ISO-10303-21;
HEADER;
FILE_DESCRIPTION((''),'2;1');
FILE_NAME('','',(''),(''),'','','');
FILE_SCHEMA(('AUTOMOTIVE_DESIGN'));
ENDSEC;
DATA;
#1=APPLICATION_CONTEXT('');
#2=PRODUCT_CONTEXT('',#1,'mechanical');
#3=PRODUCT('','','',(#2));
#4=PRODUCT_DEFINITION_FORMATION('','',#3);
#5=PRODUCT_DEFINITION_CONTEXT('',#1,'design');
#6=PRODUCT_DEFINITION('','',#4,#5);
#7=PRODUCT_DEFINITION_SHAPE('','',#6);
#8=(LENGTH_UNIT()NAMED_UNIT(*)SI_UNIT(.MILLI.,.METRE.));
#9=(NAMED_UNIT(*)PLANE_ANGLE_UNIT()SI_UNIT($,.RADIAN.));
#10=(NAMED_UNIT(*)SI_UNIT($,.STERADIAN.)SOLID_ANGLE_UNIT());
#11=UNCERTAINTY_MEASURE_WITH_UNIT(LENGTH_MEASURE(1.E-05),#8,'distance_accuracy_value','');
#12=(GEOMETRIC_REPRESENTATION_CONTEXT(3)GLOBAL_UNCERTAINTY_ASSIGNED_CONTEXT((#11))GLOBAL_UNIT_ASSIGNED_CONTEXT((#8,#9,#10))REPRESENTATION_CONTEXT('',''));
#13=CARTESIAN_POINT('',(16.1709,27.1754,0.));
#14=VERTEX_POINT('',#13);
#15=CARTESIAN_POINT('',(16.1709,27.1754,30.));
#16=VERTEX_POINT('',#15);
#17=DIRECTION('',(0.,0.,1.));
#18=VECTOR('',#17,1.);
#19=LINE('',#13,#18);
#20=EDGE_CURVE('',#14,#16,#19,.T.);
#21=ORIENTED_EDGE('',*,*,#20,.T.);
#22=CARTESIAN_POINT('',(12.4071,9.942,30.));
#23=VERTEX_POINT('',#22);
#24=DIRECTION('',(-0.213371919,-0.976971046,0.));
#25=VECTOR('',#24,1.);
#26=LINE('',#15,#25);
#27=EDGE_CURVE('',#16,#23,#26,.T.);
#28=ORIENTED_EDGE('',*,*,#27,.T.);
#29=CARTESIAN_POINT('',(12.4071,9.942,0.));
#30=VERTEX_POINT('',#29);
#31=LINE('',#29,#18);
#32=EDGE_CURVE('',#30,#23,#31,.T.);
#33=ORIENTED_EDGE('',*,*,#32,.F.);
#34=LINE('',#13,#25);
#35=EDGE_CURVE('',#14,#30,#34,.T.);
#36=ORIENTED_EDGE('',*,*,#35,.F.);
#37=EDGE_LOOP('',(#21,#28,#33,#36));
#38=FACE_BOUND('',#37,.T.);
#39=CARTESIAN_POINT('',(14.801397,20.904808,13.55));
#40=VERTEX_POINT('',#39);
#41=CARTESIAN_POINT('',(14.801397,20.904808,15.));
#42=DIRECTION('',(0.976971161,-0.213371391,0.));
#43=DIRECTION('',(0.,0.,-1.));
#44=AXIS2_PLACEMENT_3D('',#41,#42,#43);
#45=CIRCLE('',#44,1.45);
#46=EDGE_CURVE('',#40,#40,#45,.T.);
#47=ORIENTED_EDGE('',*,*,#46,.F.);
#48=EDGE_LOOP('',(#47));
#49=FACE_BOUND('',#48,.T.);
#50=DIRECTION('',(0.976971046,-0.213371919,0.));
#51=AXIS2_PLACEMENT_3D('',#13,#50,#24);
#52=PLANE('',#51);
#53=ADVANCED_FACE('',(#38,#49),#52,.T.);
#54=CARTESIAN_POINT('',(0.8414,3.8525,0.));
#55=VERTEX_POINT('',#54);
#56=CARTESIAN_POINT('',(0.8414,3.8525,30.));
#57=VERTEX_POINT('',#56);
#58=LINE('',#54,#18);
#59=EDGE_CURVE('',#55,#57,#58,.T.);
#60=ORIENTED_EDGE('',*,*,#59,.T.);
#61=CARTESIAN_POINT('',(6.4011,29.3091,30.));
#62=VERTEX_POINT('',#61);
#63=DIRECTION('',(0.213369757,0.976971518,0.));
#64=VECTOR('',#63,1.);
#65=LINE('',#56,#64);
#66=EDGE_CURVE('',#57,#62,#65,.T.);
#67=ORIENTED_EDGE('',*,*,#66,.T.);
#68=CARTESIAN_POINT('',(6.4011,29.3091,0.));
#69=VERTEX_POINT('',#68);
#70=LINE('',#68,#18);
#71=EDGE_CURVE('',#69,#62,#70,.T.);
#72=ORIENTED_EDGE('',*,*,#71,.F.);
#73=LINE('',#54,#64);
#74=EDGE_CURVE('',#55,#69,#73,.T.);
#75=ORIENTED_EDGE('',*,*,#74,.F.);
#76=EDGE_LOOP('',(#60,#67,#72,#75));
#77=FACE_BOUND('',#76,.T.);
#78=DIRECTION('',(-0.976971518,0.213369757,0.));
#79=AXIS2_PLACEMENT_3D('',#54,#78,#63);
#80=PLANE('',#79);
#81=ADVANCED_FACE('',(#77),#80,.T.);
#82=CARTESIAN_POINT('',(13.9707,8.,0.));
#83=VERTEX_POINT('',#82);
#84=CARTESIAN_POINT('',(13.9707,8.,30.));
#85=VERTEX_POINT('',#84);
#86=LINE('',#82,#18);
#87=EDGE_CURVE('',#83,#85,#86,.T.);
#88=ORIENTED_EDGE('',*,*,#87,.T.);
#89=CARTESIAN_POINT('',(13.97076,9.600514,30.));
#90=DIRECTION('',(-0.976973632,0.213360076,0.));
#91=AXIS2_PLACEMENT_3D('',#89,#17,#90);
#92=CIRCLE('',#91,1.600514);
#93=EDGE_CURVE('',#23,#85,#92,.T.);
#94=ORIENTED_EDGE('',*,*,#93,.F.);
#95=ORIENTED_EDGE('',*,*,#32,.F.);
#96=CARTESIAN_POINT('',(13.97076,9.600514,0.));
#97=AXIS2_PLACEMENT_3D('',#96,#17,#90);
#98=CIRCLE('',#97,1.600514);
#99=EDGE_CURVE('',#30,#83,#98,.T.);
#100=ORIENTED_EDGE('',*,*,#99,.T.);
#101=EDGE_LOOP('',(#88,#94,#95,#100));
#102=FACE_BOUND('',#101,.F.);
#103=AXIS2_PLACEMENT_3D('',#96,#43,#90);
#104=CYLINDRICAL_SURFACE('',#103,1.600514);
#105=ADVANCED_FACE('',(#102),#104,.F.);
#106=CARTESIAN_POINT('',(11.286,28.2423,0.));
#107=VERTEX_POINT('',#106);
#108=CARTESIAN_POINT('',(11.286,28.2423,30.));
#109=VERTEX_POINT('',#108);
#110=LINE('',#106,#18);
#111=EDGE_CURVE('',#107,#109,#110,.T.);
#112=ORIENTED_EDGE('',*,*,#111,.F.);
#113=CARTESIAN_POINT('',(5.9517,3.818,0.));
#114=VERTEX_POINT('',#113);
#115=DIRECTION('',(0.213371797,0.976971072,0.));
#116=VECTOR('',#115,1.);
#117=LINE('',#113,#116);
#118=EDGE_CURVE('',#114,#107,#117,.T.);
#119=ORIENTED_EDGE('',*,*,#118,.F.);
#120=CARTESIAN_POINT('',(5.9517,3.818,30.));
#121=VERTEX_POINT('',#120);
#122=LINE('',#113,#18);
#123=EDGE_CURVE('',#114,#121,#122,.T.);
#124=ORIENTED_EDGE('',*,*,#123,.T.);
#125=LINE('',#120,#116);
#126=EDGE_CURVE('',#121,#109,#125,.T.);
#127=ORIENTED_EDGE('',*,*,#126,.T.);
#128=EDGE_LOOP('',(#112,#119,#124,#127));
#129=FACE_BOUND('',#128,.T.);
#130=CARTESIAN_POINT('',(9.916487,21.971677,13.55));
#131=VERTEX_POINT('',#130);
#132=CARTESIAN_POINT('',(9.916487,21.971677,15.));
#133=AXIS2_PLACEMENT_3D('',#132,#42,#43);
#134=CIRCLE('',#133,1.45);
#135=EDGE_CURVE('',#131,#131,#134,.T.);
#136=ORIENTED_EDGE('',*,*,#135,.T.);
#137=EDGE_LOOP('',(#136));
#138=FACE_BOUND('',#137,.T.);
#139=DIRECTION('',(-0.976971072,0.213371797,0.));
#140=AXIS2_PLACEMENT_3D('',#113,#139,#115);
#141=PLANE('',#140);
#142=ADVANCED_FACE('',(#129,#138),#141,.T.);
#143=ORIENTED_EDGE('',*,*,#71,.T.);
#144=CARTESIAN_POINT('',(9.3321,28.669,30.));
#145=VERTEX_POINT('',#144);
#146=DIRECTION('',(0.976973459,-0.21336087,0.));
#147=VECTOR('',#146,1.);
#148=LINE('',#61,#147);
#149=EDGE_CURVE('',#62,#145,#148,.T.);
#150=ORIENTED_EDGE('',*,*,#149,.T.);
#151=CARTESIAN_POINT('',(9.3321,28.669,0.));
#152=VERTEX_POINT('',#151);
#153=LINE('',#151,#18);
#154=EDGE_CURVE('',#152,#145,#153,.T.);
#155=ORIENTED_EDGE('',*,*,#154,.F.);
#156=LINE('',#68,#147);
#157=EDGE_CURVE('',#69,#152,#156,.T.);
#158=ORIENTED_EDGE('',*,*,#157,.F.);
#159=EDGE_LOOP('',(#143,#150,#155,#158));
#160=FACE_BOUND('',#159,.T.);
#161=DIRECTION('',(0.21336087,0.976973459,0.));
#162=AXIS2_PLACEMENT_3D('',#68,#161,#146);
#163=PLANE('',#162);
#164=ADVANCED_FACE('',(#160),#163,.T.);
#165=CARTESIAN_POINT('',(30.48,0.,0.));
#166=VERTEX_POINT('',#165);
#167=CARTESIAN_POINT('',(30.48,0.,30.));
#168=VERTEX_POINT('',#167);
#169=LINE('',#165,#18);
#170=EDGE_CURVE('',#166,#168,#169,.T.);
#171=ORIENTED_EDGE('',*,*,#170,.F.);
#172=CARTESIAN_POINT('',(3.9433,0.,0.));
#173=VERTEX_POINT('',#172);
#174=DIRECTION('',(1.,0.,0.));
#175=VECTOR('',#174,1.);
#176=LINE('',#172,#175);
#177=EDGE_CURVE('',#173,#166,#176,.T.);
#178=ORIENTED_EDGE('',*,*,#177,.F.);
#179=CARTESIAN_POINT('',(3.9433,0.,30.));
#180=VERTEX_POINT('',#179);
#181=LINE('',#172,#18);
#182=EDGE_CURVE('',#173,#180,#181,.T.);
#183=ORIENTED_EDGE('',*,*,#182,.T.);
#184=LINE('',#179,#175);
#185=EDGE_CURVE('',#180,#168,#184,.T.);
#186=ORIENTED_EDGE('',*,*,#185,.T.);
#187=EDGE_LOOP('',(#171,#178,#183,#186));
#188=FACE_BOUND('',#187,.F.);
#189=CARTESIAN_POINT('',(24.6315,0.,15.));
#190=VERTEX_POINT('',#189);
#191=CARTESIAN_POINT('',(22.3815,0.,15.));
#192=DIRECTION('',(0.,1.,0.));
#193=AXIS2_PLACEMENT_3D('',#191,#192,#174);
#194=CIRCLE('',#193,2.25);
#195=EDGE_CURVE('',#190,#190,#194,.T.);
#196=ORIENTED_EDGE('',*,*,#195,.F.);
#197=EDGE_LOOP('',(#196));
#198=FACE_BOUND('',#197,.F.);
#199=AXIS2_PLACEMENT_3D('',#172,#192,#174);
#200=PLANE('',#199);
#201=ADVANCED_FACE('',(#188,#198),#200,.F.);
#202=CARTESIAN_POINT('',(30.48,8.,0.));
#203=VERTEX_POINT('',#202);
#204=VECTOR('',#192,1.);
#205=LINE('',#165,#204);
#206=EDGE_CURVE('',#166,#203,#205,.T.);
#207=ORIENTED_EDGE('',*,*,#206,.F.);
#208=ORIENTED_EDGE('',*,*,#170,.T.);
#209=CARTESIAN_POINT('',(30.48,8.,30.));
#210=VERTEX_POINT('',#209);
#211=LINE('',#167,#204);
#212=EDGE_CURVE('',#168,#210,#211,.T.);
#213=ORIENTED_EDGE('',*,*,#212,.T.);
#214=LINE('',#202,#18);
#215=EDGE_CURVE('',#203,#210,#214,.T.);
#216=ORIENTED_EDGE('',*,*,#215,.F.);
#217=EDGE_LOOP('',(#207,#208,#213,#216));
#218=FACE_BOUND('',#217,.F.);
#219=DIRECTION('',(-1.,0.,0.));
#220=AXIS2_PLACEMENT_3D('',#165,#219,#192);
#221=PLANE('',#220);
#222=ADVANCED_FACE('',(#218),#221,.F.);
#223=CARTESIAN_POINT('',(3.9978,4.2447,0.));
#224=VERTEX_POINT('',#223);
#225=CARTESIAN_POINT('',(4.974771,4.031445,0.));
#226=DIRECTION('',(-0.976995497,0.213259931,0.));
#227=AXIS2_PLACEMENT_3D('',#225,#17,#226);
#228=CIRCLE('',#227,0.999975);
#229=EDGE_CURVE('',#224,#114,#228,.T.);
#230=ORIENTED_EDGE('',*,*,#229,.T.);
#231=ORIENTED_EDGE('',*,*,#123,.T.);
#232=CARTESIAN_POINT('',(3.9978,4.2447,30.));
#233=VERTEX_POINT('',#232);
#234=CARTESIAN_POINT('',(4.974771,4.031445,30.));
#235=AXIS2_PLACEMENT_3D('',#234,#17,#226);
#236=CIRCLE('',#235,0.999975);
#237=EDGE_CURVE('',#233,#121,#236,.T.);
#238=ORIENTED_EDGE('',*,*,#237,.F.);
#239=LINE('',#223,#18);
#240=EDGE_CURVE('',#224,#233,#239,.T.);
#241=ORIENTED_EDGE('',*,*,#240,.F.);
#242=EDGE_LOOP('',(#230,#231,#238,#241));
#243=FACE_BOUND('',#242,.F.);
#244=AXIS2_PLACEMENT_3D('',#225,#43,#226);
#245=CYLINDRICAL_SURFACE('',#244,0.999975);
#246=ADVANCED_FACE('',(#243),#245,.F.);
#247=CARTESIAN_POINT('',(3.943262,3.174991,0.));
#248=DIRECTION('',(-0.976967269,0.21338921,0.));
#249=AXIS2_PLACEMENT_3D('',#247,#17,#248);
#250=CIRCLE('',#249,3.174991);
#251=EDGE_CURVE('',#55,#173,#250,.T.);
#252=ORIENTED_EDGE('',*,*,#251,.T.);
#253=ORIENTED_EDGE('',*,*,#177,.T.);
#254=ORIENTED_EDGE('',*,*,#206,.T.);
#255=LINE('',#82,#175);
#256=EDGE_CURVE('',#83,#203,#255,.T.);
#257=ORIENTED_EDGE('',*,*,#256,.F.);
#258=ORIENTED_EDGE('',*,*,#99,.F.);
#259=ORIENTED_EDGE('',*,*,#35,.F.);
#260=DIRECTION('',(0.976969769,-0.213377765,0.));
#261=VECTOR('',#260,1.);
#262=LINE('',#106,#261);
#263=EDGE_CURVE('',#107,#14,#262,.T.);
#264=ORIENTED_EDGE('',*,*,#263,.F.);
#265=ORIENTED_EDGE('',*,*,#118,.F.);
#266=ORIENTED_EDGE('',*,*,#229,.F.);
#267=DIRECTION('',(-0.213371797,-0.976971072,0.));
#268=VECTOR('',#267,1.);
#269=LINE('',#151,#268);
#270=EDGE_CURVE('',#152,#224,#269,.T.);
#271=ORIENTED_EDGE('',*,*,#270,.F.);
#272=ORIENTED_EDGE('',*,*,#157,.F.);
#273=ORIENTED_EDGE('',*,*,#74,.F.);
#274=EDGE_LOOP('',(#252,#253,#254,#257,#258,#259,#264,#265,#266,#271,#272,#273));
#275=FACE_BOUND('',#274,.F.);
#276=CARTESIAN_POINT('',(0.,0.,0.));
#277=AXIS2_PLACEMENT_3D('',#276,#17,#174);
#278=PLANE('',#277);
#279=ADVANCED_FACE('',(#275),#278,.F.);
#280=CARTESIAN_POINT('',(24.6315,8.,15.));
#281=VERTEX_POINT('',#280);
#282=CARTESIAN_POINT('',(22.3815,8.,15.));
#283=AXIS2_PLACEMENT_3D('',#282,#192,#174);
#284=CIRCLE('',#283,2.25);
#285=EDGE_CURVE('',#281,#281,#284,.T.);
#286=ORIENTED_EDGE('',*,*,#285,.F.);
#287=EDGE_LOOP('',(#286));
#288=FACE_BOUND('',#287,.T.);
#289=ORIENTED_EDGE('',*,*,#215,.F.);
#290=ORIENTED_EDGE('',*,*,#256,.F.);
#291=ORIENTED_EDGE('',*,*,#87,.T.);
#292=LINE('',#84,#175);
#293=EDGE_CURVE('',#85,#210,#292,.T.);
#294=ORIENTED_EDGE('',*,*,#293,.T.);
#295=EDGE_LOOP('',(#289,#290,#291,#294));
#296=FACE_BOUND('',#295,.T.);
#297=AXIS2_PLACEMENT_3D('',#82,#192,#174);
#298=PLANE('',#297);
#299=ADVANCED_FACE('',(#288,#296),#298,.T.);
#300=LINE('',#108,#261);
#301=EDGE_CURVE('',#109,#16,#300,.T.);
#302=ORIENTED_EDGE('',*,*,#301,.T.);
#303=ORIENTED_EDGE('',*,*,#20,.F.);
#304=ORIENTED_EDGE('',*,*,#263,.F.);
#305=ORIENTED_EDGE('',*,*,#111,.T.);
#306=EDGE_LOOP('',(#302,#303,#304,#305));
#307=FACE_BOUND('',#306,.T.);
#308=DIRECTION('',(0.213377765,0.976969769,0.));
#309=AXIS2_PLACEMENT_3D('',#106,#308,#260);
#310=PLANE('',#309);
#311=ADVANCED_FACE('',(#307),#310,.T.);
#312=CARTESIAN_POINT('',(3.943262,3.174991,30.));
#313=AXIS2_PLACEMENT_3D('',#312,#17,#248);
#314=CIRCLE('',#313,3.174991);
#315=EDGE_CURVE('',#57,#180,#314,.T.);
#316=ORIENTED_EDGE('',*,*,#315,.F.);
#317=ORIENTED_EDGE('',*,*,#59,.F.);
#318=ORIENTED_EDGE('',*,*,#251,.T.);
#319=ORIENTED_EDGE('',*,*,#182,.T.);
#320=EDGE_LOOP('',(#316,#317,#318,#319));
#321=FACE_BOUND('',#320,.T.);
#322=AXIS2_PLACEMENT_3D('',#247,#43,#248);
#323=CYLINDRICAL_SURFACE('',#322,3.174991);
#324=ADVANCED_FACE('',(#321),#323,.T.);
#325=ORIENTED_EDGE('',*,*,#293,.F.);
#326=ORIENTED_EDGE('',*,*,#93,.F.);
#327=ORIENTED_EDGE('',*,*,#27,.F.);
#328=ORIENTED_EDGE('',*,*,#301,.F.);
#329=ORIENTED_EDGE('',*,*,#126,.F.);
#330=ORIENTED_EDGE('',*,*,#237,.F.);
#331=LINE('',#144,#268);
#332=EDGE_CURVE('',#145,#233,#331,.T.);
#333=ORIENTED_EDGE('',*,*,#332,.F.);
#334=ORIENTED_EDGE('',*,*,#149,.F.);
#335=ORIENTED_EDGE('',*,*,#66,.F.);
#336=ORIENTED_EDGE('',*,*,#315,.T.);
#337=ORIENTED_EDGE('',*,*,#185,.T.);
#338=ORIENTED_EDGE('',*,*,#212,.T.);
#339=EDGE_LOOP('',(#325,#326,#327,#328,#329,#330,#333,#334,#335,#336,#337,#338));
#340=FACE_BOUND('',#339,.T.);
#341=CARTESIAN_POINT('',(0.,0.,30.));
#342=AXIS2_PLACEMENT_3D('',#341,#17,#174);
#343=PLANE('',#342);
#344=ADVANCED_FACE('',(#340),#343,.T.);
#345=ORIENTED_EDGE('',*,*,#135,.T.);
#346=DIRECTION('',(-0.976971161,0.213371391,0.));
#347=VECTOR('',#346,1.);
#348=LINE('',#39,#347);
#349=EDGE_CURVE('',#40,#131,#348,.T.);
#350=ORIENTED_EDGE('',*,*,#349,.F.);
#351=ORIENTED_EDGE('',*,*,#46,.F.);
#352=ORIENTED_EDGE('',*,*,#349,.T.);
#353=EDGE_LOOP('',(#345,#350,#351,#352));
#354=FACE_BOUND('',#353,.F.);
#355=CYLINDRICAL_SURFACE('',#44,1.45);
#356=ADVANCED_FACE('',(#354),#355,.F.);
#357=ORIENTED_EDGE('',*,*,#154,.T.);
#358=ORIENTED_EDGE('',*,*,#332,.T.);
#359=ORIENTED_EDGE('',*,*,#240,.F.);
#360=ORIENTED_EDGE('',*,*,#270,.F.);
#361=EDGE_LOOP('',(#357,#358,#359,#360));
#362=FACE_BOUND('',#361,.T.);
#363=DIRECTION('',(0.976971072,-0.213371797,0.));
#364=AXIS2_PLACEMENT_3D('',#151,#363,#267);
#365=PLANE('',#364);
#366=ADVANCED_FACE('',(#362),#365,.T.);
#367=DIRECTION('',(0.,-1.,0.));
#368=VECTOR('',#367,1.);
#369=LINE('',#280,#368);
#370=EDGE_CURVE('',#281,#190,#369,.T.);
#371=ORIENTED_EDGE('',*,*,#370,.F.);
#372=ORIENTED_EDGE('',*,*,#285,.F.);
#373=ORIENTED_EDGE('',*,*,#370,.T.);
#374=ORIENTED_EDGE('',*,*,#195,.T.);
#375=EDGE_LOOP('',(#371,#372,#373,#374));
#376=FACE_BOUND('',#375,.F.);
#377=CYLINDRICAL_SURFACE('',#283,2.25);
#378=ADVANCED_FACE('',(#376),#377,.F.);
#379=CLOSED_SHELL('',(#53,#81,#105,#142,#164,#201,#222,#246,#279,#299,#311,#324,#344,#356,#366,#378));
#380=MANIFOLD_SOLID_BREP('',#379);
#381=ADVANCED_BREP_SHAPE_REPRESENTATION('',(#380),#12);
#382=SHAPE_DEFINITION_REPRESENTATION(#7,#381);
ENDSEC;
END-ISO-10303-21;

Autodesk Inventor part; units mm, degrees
ref_plane "YZ Plane" through (0, 0, 0) normal (1, 0, 0) x (0, 1, 0)
ref_plane "XZ Plane" through (0, 0, 0) normal (0, 1, 0) x (-1, 0, 0)
ref_plane "XY Plane" through (0, 0, 0) normal (0, 0, 1) x (1, 0, 0)
sketch "Szkic1" plane through (0, 0, 0) normal (0, 0, 1) x (1, 0, 0)
  line L0 (0, -6.7527) -> (0, 35.3194) projected
  line L1 (0.8414, 3.8525) -> (6.4011, 29.3091)
  line L2 (6.4011, 29.3091) -> (9.3321, 28.669)
  line L3 (9.3321, 28.669) -> (3.9978, 4.2447)
  line L4 (5.9517, 3.818) -> (11.286, 28.2423)
  line L5 (11.286, 28.2423) -> (16.1709, 27.1754)
  arc A0 (3.9978, 4.2447) -> (5.9517, 3.818) centre (4.9747, 4.0314) ccw
  line L6 (16.1709, 27.1754) -> (12.4071, 9.942)
  line L7 (13.9707, 8) -> (30.48, 8)
  arc A1 (12.4071, 9.942) -> (13.9707, 8) centre (13.9707, 9.6005) ccw
  line L8 (3.9433, 0) -> (30.48, 0)
  line L9 (30.48, 0) -> (30.48, 8)
  arc A2 (0.8414, 3.8525) -> (3.9433, 0) centre (3.9433, 3.175) ccw
  point P0 (0, 0)
  dimension "d0" = 12.32
  dimension "d1" = 3
  dimension "d2" = 30
  dimension "d3" = 5
  dimension "d4" = 8
  dimension "d5" = 25
  dimension "d6" = 2
  dimension "d7" = 30.48
  dimension "d8" = 1.6005
  dimension "d9" = 3.175
extrude "Wyciągnięcie proste1" add sketch "Szkic1" along normal blind 30
sketch "Szkic2" plane through (13.9707, 8, 0) normal (0, 1, 0) x (1, 0, 0)
  circle A0 centre (8.4108, -15) radius 2.25
  point P0 (-13.9707, 0)
  dimension "d12" = 4.5
extrude "Wyciągnięcie proste2" cut sketch "Szkic2" against normal blind 30
sketch "Szkic3" plane through (16.1709, 27.1754, 30) normal (0.9769712, -0.2133714, 0) x (0, 0, -1)
  circle A0 centre (15, -6.4184) radius 1.45
  point P0 (30, -30)
  dimension "d15" = 2.9
extrude "Wyciągnięcie proste3" cut sketch "Szkic3" against normal up to next
properties part number "lustereczko"
